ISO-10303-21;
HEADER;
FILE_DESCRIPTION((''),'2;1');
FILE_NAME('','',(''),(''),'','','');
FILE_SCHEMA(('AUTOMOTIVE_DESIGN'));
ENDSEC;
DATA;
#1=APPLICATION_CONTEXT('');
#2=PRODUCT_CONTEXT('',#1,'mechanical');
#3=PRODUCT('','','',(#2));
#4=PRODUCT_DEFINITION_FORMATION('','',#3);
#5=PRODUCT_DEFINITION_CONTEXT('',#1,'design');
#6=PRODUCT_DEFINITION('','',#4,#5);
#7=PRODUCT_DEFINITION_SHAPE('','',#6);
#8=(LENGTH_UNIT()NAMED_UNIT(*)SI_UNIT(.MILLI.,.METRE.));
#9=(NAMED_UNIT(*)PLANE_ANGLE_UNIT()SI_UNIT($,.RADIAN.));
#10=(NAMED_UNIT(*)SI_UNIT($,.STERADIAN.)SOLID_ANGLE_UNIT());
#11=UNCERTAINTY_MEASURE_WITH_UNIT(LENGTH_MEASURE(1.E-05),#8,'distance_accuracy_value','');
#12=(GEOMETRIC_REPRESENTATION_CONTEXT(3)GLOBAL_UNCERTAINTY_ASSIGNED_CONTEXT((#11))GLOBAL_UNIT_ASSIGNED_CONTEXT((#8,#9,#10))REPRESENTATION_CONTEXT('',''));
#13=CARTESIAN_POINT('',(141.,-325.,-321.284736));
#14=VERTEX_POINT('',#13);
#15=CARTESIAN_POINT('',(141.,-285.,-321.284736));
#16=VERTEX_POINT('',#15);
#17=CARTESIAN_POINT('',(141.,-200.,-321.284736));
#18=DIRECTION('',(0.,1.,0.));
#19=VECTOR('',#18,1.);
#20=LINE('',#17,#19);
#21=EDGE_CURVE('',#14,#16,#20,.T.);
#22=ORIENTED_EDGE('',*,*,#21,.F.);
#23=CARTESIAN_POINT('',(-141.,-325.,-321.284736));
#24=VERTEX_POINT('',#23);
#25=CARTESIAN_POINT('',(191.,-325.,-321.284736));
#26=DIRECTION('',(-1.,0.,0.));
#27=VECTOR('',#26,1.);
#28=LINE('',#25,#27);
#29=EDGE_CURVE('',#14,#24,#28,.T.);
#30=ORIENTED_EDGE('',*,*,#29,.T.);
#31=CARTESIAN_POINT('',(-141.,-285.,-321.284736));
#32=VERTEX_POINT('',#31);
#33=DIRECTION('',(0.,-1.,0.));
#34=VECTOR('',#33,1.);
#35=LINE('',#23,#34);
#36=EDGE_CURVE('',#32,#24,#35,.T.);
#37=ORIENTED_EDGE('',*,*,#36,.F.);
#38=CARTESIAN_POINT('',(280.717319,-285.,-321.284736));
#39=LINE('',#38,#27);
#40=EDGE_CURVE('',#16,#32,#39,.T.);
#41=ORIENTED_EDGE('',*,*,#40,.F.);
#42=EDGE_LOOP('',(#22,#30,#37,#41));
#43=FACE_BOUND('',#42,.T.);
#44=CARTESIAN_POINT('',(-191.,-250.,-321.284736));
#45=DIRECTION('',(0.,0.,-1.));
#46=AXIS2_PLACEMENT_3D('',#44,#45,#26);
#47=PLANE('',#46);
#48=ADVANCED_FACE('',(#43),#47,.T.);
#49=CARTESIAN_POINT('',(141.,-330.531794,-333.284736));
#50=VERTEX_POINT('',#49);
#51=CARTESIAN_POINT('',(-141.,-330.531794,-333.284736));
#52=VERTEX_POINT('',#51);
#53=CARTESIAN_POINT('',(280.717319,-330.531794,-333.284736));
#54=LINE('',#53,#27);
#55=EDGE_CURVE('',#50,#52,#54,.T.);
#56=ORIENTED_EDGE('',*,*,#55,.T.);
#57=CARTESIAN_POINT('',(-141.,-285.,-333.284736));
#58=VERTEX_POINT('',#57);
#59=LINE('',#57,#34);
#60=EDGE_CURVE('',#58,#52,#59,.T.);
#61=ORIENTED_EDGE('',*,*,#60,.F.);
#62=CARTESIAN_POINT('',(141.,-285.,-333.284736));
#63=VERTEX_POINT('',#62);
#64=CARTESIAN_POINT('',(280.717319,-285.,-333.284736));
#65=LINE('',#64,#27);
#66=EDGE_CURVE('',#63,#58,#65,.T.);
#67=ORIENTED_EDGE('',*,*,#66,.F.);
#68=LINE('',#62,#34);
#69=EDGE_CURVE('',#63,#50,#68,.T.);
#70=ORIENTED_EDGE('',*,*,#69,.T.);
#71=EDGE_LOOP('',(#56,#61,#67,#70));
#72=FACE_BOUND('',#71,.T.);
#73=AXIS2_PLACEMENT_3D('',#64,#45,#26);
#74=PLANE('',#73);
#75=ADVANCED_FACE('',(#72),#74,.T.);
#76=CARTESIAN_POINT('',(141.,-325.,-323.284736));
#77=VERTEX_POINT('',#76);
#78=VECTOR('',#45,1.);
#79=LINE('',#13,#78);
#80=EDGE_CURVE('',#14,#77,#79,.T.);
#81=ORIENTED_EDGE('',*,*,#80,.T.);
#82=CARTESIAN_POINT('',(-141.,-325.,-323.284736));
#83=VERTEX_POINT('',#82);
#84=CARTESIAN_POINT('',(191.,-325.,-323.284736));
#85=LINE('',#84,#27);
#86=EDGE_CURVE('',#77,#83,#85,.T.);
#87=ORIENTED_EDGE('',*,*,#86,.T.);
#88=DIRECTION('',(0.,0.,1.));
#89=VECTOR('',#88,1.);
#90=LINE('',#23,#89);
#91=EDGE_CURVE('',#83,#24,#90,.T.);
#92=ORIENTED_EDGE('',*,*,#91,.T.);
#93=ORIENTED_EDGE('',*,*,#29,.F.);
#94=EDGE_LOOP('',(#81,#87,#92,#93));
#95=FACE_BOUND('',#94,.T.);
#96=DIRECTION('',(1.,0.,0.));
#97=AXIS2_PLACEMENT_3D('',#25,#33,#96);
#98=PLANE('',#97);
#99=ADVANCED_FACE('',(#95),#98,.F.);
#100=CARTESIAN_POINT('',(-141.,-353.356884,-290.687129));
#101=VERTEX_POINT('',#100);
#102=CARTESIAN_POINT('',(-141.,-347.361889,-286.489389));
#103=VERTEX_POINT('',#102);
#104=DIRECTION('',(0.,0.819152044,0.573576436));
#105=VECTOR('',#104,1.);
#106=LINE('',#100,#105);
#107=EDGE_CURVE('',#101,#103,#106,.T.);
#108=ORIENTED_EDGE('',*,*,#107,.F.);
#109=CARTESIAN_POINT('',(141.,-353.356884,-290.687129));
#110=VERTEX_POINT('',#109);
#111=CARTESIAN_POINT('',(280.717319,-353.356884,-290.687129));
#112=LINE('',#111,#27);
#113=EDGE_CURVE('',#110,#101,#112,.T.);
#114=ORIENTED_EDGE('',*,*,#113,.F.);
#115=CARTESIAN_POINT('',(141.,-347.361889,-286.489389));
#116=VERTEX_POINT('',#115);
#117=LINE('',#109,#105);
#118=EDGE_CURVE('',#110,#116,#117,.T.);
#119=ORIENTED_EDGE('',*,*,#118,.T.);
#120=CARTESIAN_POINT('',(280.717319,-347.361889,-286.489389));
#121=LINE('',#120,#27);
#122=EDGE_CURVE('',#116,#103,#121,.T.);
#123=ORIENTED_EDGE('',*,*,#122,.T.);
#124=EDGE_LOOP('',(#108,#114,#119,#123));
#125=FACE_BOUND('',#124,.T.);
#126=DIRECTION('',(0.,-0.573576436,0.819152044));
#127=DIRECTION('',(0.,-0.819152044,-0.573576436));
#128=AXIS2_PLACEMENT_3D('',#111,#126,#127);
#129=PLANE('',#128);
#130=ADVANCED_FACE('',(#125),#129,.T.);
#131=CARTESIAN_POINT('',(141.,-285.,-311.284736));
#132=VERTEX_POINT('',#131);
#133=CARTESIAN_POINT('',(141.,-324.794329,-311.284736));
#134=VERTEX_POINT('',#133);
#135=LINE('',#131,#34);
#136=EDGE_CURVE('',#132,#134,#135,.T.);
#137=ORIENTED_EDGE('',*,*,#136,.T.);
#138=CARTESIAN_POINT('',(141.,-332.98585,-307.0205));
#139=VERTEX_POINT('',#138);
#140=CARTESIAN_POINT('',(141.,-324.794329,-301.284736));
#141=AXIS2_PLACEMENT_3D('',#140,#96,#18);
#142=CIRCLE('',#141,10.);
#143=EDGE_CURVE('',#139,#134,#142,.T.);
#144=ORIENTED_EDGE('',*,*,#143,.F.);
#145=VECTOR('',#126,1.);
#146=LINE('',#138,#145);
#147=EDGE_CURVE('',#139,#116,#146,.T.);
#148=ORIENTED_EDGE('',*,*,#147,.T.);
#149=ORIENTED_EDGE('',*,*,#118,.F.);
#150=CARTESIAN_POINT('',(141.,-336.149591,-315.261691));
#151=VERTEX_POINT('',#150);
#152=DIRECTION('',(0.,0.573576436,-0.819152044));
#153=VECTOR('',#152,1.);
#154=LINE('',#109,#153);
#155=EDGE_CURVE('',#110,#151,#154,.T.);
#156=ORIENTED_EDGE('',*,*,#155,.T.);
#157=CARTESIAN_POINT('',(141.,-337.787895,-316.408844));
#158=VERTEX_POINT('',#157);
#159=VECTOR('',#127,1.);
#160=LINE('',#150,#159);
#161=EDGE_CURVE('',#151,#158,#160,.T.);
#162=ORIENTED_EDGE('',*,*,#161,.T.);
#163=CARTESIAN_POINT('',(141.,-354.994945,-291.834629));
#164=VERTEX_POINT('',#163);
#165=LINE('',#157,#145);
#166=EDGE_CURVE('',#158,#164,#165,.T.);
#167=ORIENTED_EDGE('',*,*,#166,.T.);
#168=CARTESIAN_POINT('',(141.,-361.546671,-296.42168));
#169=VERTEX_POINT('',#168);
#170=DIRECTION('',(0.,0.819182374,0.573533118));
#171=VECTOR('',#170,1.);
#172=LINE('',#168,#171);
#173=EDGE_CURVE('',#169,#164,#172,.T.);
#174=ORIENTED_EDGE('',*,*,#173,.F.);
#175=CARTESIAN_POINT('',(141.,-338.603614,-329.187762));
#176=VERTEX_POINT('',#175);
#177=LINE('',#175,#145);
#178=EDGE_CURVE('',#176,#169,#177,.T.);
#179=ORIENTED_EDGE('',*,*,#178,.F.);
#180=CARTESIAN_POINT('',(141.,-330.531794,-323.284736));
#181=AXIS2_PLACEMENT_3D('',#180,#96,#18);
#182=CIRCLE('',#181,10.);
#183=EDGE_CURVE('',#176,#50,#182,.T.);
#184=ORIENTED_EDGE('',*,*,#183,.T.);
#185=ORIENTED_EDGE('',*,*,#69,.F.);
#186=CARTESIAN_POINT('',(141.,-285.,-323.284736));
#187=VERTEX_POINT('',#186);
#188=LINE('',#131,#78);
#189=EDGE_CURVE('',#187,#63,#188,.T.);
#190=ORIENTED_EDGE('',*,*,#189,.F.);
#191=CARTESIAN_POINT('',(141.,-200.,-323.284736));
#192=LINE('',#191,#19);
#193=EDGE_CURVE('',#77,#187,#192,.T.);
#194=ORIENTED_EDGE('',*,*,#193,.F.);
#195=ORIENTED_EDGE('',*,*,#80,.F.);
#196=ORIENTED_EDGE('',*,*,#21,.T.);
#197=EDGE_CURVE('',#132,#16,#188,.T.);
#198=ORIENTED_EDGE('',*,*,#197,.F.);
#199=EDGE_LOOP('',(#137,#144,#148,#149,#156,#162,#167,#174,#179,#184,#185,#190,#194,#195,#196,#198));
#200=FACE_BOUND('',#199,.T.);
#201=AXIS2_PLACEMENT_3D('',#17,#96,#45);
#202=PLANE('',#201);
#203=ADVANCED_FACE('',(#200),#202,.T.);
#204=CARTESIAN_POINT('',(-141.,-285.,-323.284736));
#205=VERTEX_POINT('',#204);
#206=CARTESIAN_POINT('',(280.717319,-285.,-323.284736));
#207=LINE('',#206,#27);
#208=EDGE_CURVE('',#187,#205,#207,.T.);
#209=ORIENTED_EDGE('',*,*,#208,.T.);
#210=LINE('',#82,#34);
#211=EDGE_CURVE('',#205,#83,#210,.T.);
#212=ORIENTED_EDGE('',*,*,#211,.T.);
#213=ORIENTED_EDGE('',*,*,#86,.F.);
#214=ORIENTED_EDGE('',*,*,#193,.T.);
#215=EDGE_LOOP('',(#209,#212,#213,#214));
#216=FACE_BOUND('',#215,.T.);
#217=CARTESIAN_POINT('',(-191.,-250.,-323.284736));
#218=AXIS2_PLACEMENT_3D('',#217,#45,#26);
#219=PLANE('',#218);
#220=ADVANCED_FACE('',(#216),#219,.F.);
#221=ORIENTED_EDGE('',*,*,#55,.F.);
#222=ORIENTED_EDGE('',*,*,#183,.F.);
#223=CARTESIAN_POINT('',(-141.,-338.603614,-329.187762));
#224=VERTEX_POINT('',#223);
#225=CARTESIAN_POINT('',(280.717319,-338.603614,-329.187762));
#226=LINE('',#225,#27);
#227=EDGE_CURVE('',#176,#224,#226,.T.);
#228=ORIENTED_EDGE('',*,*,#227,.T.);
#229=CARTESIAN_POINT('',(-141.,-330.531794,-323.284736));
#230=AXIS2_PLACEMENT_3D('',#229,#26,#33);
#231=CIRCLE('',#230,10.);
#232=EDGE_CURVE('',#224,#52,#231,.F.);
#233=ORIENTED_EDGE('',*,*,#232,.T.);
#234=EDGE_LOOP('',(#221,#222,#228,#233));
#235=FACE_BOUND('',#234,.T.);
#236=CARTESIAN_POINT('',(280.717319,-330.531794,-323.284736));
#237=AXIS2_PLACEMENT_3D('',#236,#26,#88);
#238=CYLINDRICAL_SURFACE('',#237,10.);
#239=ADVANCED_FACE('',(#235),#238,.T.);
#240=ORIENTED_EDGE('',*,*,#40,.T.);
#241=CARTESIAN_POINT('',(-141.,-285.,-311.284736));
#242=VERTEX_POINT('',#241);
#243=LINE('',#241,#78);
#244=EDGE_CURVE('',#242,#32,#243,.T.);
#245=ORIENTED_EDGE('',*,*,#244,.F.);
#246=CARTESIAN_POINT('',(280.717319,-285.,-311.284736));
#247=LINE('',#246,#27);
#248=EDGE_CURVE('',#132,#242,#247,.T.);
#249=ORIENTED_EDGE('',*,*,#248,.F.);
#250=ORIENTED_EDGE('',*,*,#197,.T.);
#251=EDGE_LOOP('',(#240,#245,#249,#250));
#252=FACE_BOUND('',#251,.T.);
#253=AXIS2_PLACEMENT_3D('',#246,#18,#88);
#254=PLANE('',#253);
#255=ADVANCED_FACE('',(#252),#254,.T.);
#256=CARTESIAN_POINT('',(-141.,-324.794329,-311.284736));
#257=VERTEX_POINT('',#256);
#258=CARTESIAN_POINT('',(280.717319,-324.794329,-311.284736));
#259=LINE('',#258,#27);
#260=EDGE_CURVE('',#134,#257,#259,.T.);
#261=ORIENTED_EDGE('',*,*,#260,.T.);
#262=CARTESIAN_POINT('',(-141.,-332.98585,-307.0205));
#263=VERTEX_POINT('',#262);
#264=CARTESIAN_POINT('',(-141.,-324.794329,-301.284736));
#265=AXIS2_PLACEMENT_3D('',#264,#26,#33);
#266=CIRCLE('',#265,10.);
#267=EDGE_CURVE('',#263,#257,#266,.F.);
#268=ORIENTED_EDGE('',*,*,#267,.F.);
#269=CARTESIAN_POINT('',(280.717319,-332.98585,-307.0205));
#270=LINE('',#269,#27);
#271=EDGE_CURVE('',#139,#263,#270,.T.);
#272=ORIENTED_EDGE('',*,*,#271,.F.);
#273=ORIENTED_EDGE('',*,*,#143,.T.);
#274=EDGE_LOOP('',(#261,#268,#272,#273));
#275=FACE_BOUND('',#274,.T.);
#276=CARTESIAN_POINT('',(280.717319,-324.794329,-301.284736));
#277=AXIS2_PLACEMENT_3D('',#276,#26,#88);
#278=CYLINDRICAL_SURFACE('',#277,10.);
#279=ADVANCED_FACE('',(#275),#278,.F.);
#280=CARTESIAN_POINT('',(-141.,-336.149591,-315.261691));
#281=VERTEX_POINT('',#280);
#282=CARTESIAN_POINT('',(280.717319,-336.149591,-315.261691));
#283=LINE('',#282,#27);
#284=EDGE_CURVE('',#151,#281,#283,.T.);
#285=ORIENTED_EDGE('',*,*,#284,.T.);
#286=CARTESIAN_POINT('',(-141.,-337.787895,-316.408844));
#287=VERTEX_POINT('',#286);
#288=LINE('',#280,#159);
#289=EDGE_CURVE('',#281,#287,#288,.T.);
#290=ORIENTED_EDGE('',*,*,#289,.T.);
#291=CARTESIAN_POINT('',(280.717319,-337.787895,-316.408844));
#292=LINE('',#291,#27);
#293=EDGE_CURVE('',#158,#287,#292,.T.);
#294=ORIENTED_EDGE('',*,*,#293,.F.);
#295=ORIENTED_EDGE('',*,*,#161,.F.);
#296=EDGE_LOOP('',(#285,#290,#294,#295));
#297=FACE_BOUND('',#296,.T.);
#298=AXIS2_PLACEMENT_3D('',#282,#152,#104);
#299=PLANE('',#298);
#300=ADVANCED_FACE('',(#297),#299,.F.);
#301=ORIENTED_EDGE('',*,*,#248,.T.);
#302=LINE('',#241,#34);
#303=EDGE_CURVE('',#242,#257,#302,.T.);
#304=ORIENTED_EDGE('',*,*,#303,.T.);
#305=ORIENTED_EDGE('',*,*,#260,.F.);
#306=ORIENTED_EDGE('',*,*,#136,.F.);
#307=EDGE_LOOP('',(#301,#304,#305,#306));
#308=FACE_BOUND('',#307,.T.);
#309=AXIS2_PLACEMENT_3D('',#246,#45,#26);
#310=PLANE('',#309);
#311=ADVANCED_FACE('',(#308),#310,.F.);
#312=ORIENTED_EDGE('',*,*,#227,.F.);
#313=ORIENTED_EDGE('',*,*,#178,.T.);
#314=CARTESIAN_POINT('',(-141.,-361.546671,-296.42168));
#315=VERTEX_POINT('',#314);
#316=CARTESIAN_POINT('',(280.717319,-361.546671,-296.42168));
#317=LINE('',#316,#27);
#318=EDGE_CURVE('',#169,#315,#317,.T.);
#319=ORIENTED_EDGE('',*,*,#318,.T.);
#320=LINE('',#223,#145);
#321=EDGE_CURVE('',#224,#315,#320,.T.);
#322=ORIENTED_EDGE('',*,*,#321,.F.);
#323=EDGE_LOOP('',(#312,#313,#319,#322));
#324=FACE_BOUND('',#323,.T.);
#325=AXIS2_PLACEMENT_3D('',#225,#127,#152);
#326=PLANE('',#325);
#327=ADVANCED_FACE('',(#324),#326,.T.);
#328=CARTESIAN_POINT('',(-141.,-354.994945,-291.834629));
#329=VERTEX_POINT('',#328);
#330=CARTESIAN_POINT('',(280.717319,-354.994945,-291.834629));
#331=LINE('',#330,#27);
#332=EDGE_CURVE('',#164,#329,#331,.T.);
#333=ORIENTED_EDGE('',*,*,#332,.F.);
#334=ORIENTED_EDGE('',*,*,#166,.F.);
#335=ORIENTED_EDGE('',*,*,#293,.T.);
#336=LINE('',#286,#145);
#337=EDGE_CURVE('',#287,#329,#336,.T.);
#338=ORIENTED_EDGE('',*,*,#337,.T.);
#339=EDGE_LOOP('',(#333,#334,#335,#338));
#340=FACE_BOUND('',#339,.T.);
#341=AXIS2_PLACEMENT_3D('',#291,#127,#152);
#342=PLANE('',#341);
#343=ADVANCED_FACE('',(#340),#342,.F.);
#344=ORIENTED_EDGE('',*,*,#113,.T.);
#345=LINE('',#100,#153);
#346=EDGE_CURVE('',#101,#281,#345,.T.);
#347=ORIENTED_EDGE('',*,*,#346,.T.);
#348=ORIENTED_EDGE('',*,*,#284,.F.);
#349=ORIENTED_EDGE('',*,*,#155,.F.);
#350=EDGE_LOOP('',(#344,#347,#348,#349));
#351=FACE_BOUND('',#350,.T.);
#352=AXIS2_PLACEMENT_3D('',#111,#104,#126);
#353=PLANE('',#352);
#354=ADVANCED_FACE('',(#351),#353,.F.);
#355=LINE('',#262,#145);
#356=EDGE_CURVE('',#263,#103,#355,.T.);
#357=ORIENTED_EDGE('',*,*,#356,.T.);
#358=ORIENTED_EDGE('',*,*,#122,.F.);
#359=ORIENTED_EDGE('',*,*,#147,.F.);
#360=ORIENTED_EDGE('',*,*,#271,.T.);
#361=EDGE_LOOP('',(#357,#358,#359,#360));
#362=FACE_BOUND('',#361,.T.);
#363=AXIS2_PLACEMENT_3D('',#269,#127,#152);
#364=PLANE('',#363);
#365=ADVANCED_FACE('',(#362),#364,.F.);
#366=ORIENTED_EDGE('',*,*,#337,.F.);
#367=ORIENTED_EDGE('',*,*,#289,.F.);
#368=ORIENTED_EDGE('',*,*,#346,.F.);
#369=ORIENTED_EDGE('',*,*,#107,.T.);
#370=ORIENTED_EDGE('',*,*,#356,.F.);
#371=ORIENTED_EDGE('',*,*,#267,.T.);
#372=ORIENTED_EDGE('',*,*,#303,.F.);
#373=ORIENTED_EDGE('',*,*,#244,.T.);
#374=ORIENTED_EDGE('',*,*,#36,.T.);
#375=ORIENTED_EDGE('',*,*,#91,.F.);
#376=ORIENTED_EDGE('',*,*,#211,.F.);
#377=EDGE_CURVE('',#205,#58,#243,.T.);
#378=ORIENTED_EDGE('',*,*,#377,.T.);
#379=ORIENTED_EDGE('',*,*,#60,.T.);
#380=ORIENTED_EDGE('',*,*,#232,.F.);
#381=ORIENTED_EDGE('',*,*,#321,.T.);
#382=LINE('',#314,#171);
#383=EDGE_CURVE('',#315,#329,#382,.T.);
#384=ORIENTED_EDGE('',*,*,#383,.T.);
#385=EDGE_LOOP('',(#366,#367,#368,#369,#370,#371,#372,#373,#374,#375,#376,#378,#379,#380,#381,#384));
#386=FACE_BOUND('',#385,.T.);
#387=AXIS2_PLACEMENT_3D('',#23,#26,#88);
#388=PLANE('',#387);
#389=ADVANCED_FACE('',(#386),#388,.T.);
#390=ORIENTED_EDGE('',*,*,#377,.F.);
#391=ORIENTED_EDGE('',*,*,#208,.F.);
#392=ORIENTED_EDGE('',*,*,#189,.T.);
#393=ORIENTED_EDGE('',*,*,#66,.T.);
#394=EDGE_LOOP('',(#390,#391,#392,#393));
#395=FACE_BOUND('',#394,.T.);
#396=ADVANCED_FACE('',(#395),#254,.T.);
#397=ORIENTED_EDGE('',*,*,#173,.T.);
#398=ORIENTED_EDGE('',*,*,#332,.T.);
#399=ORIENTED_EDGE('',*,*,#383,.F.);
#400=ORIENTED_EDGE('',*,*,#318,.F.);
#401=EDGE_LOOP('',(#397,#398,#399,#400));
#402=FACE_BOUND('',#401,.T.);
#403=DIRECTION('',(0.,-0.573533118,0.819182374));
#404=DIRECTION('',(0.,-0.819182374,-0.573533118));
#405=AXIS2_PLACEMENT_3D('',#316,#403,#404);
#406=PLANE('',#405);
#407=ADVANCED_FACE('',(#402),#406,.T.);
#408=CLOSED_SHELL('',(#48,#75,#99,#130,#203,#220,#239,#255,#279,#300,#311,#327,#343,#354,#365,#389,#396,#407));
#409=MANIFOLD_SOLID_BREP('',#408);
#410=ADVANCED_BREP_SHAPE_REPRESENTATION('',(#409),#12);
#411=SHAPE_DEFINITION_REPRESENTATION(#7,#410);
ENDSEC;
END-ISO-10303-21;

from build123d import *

# Parameters (mm, degrees)
BOSS_EXTRUDE2_DEPTH      = 141
BOSS_EXTRUDE2_DEPTH_BACK = 141
CAVITY1_START            = -323.284735655
CAVITY1_OUTLINE_W        = 282
CAVITY1_OUTLINE_H        = 40
CAVITY1_DEPTH            = 2


# Read off the part's stored shape, not the designer's step: Cavity1
with BuildPart() as part:
    # Sketch1 → Boss-Extrude2 (new, two sides: drawn at the far end of the back side and taken through both)
    with BuildSketch(Plane(origin=(0, 0, -321.284735655), x_dir=(0, 0, -1), z_dir=(1, 0, 0)).offset(-BOSS_EXTRUDE2_DEPTH_BACK)):
        with BuildLine():
            Line((-10, -285), (12, -285))
            Line((12, -285), (12, -330.531793911))
            ThreePointArc((12, -330.531793911), (10.917125793, -335.057815078), (7.903026481, -338.603613927))
            Line((7.903026481, -338.603613927), (-24.863055291, -361.546671381))
            Line((-24.863055291, -361.546671381), (-29.450107081, -354.994945144))
            Line((-29.450107081, -354.994945144), (-4.875892155, -337.787894608))
            Line((-4.875892155, -337.787894608), (-6.023045028, -336.149590519))
            Line((-6.023045028, -336.149590519), (-30.597606357, -353.35688361))
            Line((-30.597606357, -353.35688361), (-34.795346904, -347.361888815))
            Line((-34.795346904, -347.361888815), (-14.264235636, -332.985849937))
            ThreePointArc((-14.264235636, -332.985849937), (-11.129891668, -329.411815627), (-10, -324.794329494))
            Line((-10, -324.794329494), (-10, -285))
        make_face()
    extrude(amount=BOSS_EXTRUDE2_DEPTH + BOSS_EXTRUDE2_DEPTH_BACK)

    # Cavity1 outline → Cavity1 (cut)
    with BuildSketch(Plane.XY.offset(CAVITY1_START)):
        with Locations((0, -305)):
            Rectangle(CAVITY1_OUTLINE_W, CAVITY1_OUTLINE_H)
    extrude(amount=CAVITY1_DEPTH, mode=Mode.SUBTRACT)


solid = part.part
